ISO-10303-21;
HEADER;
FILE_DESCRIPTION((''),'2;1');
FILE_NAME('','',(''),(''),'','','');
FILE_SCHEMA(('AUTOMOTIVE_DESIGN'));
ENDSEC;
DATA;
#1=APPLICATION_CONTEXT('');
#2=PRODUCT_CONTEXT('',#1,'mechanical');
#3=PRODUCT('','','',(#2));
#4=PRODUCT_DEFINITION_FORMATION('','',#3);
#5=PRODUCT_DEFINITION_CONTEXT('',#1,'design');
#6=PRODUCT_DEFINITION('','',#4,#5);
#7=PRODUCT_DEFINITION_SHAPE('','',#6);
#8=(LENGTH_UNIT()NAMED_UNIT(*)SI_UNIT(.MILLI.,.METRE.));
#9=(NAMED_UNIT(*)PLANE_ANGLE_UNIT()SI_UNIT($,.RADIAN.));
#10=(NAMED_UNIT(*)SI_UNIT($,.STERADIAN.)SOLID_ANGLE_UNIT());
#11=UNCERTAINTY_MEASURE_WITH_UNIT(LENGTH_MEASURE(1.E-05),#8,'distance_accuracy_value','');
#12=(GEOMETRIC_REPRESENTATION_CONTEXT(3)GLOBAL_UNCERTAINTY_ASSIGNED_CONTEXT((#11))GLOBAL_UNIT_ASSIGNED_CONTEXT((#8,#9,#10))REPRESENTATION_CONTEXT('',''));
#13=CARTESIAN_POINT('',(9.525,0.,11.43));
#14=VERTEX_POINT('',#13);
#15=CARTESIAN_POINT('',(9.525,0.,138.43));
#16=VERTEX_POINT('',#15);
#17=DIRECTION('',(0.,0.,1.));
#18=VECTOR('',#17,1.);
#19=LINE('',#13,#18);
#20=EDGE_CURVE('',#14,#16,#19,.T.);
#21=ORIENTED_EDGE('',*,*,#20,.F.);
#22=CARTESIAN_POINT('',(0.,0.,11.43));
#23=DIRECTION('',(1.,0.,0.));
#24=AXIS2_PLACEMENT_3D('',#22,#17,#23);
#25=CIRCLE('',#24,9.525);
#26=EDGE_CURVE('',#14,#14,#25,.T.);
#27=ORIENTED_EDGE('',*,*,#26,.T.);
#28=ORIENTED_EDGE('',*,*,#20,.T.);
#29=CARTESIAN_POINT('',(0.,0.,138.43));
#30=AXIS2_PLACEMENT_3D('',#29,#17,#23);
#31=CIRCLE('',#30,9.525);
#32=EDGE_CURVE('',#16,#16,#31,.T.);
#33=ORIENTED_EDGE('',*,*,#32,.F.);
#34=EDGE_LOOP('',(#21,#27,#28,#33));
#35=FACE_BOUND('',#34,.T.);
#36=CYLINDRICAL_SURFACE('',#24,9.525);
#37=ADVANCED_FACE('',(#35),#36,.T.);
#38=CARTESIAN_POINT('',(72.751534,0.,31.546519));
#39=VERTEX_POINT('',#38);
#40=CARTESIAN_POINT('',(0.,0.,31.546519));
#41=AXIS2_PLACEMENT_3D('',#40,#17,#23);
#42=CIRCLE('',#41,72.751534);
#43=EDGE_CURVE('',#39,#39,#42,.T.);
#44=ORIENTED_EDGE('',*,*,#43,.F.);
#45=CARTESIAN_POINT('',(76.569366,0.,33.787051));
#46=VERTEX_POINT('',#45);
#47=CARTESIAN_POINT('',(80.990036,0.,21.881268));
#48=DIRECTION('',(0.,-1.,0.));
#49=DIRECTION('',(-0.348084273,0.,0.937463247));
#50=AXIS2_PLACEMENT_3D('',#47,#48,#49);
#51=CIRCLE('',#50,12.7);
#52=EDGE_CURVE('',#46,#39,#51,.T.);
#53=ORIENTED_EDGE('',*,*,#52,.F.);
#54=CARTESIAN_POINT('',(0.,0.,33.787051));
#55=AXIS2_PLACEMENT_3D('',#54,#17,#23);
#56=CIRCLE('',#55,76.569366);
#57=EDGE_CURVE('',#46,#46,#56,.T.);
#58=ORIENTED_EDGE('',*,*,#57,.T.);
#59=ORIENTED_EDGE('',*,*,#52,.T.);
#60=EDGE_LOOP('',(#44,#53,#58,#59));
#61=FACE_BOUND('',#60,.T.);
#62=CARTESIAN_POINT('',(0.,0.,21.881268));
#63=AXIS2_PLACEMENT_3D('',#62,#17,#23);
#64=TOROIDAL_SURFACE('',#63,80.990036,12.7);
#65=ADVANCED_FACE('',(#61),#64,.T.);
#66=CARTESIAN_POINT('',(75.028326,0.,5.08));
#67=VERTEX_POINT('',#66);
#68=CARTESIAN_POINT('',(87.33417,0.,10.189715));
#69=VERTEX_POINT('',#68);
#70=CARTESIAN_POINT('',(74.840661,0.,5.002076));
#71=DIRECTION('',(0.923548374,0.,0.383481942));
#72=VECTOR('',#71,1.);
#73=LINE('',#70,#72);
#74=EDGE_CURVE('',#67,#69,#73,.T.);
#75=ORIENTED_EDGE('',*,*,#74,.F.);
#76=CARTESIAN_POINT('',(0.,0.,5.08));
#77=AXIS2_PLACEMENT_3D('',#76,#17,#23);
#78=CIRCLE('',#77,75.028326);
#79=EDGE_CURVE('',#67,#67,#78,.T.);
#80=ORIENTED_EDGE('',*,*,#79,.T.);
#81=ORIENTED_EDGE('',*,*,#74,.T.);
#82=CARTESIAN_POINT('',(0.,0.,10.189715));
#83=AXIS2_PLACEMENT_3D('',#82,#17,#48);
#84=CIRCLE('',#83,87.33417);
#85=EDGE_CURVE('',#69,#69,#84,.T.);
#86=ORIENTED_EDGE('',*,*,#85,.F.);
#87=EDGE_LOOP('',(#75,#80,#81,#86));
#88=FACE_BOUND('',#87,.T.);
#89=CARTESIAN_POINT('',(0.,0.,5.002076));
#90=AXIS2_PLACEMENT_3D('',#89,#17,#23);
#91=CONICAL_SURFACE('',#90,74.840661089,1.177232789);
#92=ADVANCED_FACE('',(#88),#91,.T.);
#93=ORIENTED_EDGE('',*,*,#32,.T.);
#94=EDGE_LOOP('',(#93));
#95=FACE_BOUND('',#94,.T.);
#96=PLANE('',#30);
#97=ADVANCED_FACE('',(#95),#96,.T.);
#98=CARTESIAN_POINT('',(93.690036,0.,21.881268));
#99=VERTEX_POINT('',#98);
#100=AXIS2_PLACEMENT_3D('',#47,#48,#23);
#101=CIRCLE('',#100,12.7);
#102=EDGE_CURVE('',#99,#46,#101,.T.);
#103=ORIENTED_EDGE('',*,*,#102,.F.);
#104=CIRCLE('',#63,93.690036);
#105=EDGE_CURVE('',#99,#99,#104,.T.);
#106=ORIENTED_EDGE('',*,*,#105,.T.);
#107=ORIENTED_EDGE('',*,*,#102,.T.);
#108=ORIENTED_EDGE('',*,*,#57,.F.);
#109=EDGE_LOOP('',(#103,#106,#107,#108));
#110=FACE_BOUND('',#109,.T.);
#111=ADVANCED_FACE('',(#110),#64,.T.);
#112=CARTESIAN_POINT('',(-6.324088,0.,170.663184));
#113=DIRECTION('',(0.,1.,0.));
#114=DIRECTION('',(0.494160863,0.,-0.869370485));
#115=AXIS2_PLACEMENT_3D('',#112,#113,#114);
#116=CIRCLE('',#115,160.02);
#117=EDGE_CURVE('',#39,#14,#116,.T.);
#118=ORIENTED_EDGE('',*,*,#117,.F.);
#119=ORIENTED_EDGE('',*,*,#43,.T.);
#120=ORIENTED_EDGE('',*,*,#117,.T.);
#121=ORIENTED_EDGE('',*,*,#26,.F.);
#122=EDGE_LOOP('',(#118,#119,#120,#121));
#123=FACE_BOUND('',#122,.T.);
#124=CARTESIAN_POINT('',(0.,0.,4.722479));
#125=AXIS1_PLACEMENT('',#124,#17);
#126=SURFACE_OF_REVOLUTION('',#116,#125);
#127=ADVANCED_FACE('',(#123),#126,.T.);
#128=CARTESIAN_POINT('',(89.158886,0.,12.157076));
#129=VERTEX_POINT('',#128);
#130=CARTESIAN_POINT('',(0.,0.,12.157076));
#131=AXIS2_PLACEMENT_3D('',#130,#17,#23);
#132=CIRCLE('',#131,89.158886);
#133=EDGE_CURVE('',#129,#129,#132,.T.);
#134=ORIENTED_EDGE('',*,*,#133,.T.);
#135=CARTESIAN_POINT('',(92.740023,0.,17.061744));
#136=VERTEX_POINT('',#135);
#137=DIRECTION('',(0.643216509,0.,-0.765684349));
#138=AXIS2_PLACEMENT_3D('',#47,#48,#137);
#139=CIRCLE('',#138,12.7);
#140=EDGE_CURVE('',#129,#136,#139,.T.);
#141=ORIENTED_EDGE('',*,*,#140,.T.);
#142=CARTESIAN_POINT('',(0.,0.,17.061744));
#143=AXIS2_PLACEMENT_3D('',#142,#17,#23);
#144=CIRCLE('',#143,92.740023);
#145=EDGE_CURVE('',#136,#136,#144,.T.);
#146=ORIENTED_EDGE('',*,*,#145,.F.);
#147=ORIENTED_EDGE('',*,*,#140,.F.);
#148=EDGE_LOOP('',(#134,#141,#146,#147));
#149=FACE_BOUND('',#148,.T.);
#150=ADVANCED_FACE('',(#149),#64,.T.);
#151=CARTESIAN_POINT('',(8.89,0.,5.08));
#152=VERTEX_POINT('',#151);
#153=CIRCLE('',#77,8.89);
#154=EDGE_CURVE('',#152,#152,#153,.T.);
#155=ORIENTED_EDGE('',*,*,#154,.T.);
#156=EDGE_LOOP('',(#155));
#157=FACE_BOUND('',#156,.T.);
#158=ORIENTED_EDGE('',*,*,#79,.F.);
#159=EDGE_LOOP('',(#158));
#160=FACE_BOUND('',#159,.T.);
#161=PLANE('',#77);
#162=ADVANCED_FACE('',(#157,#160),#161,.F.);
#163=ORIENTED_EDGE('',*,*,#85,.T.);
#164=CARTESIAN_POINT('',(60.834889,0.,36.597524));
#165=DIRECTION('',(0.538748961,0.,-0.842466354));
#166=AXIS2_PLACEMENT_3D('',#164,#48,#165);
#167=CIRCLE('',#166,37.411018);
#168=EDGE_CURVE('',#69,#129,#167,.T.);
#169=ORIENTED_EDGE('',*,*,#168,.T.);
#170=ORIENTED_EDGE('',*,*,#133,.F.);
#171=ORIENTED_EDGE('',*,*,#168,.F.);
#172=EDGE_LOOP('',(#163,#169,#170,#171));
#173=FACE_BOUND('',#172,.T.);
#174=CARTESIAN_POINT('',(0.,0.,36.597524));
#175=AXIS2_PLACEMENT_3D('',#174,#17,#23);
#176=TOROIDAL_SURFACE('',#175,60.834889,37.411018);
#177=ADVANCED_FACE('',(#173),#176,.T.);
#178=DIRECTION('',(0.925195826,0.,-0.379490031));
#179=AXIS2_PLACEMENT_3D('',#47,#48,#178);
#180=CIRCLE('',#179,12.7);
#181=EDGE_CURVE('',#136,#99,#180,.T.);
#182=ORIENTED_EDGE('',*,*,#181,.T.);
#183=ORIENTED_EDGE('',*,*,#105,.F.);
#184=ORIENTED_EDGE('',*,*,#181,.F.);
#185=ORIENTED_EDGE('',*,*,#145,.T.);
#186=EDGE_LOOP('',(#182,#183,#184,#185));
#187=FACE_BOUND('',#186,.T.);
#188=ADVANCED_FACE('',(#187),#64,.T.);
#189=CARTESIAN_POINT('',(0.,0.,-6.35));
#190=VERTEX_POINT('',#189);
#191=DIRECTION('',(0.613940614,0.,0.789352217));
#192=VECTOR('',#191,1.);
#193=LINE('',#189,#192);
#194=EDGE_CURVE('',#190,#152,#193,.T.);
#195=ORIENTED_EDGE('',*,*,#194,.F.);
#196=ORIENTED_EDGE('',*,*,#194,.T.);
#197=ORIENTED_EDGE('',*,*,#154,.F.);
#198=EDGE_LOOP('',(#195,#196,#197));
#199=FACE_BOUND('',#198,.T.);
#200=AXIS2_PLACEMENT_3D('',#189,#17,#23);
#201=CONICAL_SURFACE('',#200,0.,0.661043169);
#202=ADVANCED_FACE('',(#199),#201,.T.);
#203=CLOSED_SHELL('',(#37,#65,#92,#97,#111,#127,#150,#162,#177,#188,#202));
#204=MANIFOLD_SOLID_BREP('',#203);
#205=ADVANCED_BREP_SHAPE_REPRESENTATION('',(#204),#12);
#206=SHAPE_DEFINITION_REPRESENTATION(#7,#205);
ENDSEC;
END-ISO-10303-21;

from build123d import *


# Not quite as in the source:
# - a fillet or chamfer that OpenCascade refuses, or shapes differently, is made with other operations: its cross-section is extruded or revolved along the edge and cut away or added


with BuildPart() as f1:
    # F0 (on Front) → F1 (revolve)
    with BuildSketch(Plane.XZ):
        with BuildLine():
            ThreePointArc((72.7515336349, 31.5465186996), (42.1923391821, 18.1752933834), (9.525, 11.43))
            Line((9.525, 11.43), (9.525, 138.43))
            Line((9.525, 138.43), (0, 138.43))
            Line((0, 138.43), (0, 5.08))
            Line((0, 5.08), (8.89, 5.08))
            Line((8.89, 5.08), (80.9900359946, 5.08))
            ThreePointArc((80.9900359946, 5.08), (85.3313804759, 8.3219837991), (89.1588856559, 12.1570763605))
            ThreePointArc((89.1588856559, 12.1570763605), (71.2952522719, 13.6775386544), (72.7515336349, 31.5465186996))
        make_face()
        with BuildLine():
            ThreePointArc((76.5693657258, 33.7870508297), (74.5620768343, 32.8344105725), (72.7515336349, 31.5465186996))
            ThreePointArc((72.7515336349, 31.5465186996), (74.6681976781, 32.6535822964), (76.5693657258, 33.7870508297))
        make_face()
        with BuildLine():
            ThreePointArc((76.5693657258, 33.7870508297), (74.6681976781, 32.6535822964), (72.7515336349, 31.5465186996))
            ThreePointArc((72.7515336349, 31.5465186996), (71.2952522719, 13.6775386544), (89.1588856559, 12.1570763605))
            ThreePointArc((89.1588856559, 12.1570763605), (91.0491403746, 14.536624633), (92.7400229866, 17.0617442093))
            ThreePointArc((92.7400229866, 17.0617442093), (93.4502694354, 19.4251359639), (93.6900359946, 21.8812675974))
            ThreePointArc((93.6900359946, 21.8812675974), (88.2408113871, 32.3079763881), (76.5693657258, 33.7870508297))
        make_face()
        with BuildLine():
            ThreePointArc((92.7400229866, 17.0617442093), (91.0491403746, 14.536624633), (89.1588856559, 12.1570763605))
            ThreePointArc((89.1588856559, 12.1570763605), (91.2469339214, 14.3922059126), (92.7400229866, 17.0617442093))
        make_face()
        Polygon((8.89, 5.08), (0, 5.08), (0, 0), (0, -6.35), align=None)
    revolve(axis=Axis((0, 0, 4.7224786045), (0, 0, 1)))

    # F2: chamfer of 5.08 on 1 edges, made by hand

    # F2_s1 → F2_t2 (revolve, cut)
    with BuildSketch(Plane.XZ):
        with BuildLine():
            Line((74.8406610891, 5.0020764693), (87.521834843, 10.2676383795))
            Line((87.521834843, 10.2676383795), (87.5938009931, 10.1959206464))
            ThreePointArc((87.5938009931, 10.1959206464), (84.4417917383, 7.4442968535), (81.044772889, 4.9944054185))
            Line((81.044772889, 4.9944054185), (80.9900359946, 4.9784))
            ThreePointArc((80.9900359946, 4.9784), (77.9153485418, 4.9784), (74.8406610891, 4.9004764693))
            Line((74.8406610891, 4.9004764693), (74.8406610891, 5.0020764693))
        make_face()
    revolve(axis=Axis((0, 0, 5.08), (0, 0, 1)), mode=Mode.SUBTRACT)


solid = f1.part
